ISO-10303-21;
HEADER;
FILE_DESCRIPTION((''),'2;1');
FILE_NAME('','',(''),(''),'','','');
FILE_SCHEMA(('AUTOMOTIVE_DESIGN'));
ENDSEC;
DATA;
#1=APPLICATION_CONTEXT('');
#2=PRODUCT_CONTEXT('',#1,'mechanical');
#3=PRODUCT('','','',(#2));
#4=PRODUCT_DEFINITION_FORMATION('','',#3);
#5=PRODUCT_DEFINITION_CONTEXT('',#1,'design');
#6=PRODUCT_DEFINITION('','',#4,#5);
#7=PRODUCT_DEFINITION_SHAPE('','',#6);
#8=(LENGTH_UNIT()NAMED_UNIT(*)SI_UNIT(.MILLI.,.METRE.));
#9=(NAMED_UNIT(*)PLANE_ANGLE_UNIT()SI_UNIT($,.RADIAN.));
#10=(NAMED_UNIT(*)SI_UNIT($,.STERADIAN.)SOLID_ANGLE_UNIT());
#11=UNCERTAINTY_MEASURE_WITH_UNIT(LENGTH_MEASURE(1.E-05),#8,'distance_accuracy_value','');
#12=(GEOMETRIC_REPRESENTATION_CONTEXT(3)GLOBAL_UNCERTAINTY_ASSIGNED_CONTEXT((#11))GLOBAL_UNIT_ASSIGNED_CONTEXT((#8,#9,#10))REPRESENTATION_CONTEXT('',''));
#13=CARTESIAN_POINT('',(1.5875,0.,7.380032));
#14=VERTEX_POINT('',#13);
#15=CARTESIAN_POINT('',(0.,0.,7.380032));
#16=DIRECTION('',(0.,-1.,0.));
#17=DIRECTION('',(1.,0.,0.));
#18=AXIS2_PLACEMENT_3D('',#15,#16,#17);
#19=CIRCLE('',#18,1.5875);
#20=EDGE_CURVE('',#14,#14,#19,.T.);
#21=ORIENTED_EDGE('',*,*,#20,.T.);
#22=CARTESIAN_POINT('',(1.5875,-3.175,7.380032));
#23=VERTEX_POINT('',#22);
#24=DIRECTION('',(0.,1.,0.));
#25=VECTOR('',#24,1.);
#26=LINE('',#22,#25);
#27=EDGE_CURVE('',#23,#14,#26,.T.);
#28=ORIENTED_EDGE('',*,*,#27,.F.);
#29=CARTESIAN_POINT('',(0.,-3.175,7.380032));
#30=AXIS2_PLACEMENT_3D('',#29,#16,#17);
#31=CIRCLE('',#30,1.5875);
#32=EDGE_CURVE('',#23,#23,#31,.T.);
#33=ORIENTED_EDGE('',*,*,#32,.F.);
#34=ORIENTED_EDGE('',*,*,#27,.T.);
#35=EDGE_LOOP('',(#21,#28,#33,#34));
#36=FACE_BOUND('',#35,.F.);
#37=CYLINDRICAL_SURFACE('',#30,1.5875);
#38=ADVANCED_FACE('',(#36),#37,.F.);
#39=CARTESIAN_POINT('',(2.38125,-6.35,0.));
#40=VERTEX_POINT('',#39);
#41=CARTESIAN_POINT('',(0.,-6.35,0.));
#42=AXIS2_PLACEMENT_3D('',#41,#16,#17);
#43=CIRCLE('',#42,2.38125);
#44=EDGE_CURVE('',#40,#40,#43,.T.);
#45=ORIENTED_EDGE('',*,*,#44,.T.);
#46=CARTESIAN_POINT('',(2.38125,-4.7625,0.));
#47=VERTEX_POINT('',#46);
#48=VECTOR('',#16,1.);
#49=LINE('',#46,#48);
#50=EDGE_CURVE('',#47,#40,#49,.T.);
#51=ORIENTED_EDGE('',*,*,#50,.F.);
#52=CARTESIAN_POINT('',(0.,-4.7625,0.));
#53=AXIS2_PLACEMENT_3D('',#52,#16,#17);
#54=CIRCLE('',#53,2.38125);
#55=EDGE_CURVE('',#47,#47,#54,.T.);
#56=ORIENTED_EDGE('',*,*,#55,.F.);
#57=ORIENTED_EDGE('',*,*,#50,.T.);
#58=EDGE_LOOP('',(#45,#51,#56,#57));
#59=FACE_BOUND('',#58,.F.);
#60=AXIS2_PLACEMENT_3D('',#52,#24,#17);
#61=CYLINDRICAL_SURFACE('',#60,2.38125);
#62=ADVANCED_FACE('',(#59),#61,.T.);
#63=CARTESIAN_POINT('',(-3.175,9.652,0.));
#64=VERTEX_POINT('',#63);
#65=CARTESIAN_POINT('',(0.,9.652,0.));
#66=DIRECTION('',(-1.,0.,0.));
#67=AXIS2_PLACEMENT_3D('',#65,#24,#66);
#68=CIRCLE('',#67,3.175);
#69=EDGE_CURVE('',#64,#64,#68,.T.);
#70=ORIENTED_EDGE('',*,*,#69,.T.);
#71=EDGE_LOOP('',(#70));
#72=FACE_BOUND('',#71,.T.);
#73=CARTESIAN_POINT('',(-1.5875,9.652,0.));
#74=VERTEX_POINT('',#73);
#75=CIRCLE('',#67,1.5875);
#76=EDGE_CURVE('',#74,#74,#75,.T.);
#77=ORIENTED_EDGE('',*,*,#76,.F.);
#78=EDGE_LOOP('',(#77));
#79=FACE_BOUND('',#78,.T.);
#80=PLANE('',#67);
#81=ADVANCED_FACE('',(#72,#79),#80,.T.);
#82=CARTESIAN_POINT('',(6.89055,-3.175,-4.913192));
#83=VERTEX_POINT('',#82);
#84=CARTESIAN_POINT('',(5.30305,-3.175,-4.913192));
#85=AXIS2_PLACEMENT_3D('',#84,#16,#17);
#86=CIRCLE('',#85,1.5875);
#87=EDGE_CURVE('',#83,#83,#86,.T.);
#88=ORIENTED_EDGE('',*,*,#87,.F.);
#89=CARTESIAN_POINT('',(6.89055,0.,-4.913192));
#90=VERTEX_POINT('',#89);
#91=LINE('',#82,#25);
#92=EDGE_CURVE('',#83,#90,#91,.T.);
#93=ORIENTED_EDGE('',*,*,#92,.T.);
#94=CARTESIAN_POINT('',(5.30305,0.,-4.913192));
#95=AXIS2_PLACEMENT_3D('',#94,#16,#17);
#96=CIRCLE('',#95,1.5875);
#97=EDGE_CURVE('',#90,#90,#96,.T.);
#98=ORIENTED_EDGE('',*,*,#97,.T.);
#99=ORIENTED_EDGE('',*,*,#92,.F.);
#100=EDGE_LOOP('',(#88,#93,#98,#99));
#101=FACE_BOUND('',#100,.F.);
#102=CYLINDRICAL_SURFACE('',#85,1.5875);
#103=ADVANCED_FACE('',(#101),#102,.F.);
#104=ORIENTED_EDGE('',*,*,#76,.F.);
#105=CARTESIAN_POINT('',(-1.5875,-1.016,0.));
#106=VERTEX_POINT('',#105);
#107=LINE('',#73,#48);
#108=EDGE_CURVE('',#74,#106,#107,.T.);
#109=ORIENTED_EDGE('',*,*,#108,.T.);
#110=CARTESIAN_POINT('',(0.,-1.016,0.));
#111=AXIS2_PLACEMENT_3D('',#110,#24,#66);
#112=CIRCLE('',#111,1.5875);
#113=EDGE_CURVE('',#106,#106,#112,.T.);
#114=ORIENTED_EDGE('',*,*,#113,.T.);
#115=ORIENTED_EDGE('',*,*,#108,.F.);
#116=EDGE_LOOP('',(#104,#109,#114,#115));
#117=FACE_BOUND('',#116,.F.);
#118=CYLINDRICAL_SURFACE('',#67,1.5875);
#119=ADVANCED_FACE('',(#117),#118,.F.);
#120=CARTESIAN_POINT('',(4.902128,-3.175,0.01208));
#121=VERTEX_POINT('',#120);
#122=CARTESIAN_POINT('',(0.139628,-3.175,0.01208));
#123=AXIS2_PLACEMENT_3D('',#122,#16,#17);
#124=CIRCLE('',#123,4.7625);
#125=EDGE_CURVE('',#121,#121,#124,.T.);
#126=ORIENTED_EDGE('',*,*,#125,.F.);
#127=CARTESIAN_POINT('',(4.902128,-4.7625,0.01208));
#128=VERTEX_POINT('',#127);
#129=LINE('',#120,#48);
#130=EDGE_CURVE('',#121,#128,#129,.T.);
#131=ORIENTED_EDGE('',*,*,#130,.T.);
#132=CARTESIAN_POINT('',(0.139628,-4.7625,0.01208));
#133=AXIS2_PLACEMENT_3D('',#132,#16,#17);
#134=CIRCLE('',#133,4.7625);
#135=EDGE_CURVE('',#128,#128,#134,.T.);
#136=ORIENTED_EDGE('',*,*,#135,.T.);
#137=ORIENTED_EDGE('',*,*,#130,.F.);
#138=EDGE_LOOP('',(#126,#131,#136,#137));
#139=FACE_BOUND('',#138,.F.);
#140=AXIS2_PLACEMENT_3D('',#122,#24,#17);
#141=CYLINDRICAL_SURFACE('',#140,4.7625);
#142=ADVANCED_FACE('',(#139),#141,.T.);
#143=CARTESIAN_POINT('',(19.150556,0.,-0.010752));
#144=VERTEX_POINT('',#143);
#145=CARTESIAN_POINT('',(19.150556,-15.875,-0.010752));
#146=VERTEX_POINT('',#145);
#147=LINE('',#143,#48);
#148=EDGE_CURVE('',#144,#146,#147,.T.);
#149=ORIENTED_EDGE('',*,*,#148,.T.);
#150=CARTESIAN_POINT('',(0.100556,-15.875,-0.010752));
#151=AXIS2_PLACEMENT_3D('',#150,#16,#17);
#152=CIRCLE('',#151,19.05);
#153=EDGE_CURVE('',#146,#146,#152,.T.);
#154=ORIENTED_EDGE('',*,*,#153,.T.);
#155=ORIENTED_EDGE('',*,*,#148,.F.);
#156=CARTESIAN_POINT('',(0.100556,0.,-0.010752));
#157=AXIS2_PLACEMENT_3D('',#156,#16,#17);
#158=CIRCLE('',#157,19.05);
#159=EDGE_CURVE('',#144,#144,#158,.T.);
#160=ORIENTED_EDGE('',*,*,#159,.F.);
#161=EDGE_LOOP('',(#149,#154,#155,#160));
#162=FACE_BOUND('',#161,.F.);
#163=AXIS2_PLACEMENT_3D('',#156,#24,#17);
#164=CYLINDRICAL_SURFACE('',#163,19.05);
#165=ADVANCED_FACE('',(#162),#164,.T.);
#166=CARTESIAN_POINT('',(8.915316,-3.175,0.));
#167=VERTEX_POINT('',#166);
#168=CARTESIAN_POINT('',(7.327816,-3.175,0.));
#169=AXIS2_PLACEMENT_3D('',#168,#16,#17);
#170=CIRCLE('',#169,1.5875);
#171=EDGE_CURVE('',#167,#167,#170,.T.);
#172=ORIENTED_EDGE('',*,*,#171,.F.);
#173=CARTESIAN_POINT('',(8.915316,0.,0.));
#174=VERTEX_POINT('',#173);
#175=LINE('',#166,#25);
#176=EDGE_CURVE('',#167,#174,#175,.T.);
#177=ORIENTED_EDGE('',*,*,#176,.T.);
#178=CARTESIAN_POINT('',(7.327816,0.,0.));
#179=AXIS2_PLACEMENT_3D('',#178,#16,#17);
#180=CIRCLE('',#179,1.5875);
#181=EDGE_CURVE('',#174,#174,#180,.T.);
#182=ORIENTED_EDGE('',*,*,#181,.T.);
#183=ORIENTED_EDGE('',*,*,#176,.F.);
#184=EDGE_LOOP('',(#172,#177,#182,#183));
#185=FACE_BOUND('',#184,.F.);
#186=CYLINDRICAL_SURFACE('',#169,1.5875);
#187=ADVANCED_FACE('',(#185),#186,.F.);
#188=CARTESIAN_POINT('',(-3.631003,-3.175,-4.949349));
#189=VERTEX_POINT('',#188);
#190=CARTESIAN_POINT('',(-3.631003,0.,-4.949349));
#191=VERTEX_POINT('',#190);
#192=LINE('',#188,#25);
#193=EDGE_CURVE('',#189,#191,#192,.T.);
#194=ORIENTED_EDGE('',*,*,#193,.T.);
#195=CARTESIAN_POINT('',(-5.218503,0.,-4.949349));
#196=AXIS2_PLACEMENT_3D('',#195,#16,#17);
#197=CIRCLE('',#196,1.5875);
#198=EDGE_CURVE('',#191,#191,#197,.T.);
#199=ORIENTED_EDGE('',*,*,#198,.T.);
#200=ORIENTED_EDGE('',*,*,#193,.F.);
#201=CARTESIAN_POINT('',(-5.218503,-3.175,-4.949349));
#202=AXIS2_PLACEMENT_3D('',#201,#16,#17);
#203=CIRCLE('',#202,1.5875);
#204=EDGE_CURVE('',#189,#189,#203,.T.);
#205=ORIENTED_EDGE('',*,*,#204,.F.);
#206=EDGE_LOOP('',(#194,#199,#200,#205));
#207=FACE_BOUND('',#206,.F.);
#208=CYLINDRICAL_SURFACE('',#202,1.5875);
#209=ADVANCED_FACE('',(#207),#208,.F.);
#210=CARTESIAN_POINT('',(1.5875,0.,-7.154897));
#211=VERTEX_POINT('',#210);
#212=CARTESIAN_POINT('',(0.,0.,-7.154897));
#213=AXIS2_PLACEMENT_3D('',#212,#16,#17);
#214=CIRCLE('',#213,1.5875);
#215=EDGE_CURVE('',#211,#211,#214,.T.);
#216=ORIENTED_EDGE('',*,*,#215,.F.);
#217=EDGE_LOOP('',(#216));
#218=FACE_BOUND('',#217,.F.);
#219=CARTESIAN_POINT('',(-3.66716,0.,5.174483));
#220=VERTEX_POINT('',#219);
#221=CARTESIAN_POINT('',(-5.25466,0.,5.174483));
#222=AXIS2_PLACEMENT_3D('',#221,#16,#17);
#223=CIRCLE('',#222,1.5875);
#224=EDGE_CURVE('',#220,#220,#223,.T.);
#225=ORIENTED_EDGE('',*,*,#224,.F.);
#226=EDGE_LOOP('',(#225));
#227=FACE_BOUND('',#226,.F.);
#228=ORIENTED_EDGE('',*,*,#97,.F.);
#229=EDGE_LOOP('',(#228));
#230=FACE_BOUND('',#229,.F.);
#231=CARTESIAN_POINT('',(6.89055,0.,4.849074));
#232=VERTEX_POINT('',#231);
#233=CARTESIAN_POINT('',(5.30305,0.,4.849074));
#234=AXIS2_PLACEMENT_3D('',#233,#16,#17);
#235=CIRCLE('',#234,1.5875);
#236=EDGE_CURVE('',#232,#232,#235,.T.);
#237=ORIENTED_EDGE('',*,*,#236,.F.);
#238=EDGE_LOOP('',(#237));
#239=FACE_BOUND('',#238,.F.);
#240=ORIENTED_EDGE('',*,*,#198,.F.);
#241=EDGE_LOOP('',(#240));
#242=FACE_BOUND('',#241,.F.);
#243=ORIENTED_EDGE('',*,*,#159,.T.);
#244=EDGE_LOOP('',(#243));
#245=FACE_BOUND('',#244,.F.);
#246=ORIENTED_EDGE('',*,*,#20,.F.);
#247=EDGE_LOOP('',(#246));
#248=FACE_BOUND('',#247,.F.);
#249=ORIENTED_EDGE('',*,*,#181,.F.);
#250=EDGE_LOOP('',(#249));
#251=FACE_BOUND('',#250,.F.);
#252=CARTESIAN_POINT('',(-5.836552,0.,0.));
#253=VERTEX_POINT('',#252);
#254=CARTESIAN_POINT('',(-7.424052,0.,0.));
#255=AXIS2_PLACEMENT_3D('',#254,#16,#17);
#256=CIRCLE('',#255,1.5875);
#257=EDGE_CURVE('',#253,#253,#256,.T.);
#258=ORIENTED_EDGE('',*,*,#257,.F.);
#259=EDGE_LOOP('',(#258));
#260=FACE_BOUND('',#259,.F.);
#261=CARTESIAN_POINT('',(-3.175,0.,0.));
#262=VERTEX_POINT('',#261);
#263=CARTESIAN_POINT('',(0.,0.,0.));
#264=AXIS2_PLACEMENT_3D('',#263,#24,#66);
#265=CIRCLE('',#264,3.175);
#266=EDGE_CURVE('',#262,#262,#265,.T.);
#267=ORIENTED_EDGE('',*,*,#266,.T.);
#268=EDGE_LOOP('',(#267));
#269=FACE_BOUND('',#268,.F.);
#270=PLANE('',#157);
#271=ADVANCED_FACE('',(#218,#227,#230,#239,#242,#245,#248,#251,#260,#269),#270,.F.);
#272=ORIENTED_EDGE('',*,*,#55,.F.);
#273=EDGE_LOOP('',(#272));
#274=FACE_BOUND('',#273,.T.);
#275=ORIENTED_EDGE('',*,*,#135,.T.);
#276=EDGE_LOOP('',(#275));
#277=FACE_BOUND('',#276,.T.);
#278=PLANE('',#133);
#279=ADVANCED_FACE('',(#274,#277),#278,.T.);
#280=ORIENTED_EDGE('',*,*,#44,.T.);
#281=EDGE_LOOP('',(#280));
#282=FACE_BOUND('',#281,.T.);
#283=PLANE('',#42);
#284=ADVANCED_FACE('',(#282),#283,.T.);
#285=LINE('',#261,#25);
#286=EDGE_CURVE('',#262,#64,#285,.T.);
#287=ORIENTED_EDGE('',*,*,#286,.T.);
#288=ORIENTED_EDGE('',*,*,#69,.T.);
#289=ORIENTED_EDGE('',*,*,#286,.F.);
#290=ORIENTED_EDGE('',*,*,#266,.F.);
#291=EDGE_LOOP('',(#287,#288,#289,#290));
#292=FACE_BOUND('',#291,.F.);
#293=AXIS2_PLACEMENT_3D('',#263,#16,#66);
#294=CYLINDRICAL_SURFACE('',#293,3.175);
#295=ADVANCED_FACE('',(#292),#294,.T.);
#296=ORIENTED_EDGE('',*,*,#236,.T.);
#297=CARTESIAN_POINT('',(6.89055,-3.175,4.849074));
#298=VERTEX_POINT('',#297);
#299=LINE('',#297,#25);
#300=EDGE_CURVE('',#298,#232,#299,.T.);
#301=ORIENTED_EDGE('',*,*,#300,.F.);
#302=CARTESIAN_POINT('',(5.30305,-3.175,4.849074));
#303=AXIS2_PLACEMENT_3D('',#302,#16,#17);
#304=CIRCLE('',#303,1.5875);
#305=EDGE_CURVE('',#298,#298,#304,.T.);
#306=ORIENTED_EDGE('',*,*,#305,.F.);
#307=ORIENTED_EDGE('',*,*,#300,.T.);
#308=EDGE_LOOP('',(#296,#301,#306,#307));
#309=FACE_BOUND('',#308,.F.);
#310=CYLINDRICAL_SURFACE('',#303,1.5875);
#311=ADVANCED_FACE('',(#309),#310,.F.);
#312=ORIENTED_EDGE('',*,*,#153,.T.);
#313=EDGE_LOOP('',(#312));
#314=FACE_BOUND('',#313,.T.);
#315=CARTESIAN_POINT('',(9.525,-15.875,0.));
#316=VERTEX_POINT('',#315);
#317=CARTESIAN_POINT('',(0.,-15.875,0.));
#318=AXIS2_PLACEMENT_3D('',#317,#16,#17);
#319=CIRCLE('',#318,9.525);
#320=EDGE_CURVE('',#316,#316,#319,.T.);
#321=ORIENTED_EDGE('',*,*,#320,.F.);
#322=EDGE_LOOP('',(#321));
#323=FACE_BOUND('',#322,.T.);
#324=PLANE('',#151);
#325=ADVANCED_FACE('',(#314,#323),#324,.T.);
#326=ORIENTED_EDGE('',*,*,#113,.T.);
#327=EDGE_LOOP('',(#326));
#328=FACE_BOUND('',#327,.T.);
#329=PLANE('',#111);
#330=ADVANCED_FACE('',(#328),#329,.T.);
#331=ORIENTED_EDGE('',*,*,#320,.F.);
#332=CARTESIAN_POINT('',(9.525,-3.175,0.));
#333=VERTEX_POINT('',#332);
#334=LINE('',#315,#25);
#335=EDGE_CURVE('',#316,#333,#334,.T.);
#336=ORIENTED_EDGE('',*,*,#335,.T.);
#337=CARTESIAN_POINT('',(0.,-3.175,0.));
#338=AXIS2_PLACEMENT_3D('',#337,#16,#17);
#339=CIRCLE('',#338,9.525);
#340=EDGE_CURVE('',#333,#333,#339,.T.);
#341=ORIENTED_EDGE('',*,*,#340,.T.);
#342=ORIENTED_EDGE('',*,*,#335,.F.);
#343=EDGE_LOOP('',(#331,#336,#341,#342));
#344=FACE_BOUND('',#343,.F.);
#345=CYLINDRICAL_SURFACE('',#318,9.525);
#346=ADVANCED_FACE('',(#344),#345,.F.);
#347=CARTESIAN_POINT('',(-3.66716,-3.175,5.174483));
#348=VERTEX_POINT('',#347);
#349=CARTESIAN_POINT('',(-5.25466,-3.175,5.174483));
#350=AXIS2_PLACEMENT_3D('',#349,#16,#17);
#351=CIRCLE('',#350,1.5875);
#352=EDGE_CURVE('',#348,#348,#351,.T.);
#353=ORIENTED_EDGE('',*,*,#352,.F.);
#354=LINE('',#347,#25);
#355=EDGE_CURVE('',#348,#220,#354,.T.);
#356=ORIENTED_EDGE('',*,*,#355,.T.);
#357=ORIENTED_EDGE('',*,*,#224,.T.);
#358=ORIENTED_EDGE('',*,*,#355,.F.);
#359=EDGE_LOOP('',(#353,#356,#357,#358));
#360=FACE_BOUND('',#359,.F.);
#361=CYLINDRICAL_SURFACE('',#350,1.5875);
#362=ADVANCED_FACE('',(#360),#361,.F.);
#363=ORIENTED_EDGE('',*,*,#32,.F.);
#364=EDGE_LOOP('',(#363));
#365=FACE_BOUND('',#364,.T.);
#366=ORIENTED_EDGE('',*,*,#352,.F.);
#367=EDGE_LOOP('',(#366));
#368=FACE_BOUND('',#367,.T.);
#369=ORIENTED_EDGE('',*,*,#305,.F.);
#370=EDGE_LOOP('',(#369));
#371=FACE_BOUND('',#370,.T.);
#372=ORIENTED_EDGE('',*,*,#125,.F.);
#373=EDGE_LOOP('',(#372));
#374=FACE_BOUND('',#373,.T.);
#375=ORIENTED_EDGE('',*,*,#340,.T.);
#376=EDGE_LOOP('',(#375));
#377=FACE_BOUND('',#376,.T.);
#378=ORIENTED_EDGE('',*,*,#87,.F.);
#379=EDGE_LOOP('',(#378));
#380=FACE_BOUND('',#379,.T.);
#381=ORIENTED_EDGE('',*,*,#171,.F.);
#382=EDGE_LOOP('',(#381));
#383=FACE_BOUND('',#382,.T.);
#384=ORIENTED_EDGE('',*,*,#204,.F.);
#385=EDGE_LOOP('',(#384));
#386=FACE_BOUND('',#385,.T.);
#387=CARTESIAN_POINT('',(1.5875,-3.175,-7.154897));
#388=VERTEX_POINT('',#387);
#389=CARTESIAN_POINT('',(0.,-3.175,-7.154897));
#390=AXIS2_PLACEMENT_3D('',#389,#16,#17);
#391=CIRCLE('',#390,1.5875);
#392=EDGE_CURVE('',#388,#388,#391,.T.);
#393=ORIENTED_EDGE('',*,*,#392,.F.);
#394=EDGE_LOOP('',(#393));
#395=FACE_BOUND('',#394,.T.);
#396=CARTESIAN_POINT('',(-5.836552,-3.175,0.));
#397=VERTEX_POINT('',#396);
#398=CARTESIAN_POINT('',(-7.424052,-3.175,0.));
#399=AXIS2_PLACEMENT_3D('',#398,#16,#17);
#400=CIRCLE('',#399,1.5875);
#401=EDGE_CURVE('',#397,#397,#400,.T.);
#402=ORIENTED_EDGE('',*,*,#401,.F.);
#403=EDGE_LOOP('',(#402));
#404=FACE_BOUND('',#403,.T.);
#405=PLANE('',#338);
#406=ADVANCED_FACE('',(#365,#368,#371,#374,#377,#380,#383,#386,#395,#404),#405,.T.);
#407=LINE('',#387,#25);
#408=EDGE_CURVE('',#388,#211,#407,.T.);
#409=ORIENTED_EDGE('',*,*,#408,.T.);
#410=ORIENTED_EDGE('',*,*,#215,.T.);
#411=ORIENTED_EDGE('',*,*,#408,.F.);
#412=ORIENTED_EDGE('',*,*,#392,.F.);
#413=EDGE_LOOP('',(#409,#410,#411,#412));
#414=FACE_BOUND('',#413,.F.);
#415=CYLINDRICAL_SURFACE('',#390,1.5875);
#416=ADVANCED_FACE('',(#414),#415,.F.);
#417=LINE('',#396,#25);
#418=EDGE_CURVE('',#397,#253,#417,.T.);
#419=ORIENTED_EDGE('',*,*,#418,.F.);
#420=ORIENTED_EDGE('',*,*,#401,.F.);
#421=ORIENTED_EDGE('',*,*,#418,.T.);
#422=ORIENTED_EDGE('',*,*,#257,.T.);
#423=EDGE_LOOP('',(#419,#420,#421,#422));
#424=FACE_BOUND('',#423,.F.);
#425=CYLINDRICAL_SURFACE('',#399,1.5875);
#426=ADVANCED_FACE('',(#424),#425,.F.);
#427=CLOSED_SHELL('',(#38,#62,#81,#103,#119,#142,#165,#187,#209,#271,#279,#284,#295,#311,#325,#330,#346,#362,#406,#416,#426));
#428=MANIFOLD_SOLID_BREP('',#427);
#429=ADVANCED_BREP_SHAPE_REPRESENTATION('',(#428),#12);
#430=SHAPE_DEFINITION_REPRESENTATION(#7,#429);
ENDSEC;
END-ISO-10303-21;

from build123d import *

# Parameters (mm, degrees)
F0_R      = 19.05
F1_DEPTH  = 15.875
F2_R      = 9.525
F3_DEPTH  = 12.7
F4_R      = 1.5875
F5_DEPTH  = 25.4
F6_R      = 1.5875
F7_DEPTH  = 25.4
F8_R      = 1.5875
F9_DEPTH  = 25.4
F10_R     = 1.5875
F11_DEPTH = 25.4
F12_R     = 1.5875
F13_DEPTH = 25.4
F14_R     = 1.5875
F15_DEPTH = 25.4
F16_R     = 1.5875
F17_DEPTH = 25.4
F18_R     = 1.5875
F19_DEPTH = 25.4
F20_R     = 4.7625
F21_DEPTH = 1.5875
F22_R     = 2.38125
F23_DEPTH = 1.5875
F24_R     = 3.175
F25_DEPTH = 9.652
F26_R     = 1.5875
F27_DEPTH = 10.668


# Not quite as in the source:
# - a length typed as a fraction of an inch, garbled in the dataset ("3 / 203.2 mm" for 3/8 in), is restored


with BuildPart() as f1:
    # F0 (on Front) → F1 (new body)
    with BuildSketch(Plane.XZ):
        with Locations((0.1005562392, -0.0107518102)):
            Circle(F0_R)
    extrude(amount=F1_DEPTH)

    # F2 (on face) → F3 (cut)
    with BuildSketch(Plane.XZ.offset(15.875)):
        Circle(F2_R)
    extrude(amount=-F3_DEPTH, mode=Mode.SUBTRACT)

    # F4 (on face) → F5 (cut)
    with BuildSketch(Plane.XZ.offset(3.175)):
        with Locations((0, 7.3800315149)):
            Circle(F4_R)
    extrude(amount=-F5_DEPTH, mode=Mode.SUBTRACT)

    # F6 (on face) → F7 (cut)
    with BuildSketch(Plane.XZ.offset(3.175)):
        with Locations((0, -7.154897321)):
            Circle(F6_R)
    extrude(amount=-F7_DEPTH, mode=Mode.SUBTRACT)

    # F8 (on face) → F9 (cut)
    with BuildSketch(Plane.XZ.offset(3.175)):
        with Locations((7.3278159834, 0)):
            Circle(F8_R)
    extrude(amount=-F9_DEPTH, mode=Mode.SUBTRACT)

    # F10 (on face) → F11 (cut)
    with BuildSketch(Plane.XZ.offset(3.175)):
        with Locations((-7.4240518734, 0)):
            Circle(F10_R)
    extrude(amount=-F11_DEPTH, mode=Mode.SUBTRACT)

    # F12 (on face) → F13 (cut)
    with BuildSketch(Plane.XZ.offset(3.175)):
        with Locations((-5.2546598017, 5.1744827069)):
            Circle(F12_R)
    extrude(amount=-F13_DEPTH, mode=Mode.SUBTRACT)

    # F14 (on face) → F15 (cut)
    with BuildSketch(Plane.XZ.offset(3.175)):
        with Locations((5.3030503914, 4.8490739428)):
            Circle(F14_R)
    extrude(amount=-F15_DEPTH, mode=Mode.SUBTRACT)

    # F16 (on face) → F17 (cut)
    with BuildSketch(Plane.XZ.offset(3.175)):
        with Locations((-5.2185030654, -4.949348513)):
            Circle(F16_R)
    extrude(amount=-F17_DEPTH, mode=Mode.SUBTRACT)

    # F18 (on face) → F19 (cut)
    with BuildSketch(Plane.XZ.offset(3.175)):
        with Locations((5.3030503914, -4.9131917767)):
            Circle(F18_R)
    extrude(amount=-F19_DEPTH, mode=Mode.SUBTRACT)

    # F20 (on face) → F21 (join)
    with BuildSketch(Plane.XZ.offset(3.175)):
        with Locations((0.1396279233, 0.0120795696)):
            Circle(F20_R)
    extrude(amount=F21_DEPTH)

    # F22 (on face) → F23 (join)
    with BuildSketch(Plane.XZ.offset(4.7625)):
        Circle(F22_R)
    extrude(amount=F23_DEPTH)

    # F24 (on face) → F25 (join)
    with BuildSketch(Plane(origin=(0, 0, 0), x_dir=(-1, 0, 0), z_dir=(0, 1, 0))):
        Circle(F24_R)
    extrude(amount=F25_DEPTH)

    # F26 (on face) → F27 (cut)
    with BuildSketch(Plane(origin=(0, 9.652, 0), x_dir=(-1, 0, 0), z_dir=(0, 1, 0))):
        Circle(F26_R)
    extrude(amount=-F27_DEPTH, mode=Mode.SUBTRACT)


solid = f1.part
